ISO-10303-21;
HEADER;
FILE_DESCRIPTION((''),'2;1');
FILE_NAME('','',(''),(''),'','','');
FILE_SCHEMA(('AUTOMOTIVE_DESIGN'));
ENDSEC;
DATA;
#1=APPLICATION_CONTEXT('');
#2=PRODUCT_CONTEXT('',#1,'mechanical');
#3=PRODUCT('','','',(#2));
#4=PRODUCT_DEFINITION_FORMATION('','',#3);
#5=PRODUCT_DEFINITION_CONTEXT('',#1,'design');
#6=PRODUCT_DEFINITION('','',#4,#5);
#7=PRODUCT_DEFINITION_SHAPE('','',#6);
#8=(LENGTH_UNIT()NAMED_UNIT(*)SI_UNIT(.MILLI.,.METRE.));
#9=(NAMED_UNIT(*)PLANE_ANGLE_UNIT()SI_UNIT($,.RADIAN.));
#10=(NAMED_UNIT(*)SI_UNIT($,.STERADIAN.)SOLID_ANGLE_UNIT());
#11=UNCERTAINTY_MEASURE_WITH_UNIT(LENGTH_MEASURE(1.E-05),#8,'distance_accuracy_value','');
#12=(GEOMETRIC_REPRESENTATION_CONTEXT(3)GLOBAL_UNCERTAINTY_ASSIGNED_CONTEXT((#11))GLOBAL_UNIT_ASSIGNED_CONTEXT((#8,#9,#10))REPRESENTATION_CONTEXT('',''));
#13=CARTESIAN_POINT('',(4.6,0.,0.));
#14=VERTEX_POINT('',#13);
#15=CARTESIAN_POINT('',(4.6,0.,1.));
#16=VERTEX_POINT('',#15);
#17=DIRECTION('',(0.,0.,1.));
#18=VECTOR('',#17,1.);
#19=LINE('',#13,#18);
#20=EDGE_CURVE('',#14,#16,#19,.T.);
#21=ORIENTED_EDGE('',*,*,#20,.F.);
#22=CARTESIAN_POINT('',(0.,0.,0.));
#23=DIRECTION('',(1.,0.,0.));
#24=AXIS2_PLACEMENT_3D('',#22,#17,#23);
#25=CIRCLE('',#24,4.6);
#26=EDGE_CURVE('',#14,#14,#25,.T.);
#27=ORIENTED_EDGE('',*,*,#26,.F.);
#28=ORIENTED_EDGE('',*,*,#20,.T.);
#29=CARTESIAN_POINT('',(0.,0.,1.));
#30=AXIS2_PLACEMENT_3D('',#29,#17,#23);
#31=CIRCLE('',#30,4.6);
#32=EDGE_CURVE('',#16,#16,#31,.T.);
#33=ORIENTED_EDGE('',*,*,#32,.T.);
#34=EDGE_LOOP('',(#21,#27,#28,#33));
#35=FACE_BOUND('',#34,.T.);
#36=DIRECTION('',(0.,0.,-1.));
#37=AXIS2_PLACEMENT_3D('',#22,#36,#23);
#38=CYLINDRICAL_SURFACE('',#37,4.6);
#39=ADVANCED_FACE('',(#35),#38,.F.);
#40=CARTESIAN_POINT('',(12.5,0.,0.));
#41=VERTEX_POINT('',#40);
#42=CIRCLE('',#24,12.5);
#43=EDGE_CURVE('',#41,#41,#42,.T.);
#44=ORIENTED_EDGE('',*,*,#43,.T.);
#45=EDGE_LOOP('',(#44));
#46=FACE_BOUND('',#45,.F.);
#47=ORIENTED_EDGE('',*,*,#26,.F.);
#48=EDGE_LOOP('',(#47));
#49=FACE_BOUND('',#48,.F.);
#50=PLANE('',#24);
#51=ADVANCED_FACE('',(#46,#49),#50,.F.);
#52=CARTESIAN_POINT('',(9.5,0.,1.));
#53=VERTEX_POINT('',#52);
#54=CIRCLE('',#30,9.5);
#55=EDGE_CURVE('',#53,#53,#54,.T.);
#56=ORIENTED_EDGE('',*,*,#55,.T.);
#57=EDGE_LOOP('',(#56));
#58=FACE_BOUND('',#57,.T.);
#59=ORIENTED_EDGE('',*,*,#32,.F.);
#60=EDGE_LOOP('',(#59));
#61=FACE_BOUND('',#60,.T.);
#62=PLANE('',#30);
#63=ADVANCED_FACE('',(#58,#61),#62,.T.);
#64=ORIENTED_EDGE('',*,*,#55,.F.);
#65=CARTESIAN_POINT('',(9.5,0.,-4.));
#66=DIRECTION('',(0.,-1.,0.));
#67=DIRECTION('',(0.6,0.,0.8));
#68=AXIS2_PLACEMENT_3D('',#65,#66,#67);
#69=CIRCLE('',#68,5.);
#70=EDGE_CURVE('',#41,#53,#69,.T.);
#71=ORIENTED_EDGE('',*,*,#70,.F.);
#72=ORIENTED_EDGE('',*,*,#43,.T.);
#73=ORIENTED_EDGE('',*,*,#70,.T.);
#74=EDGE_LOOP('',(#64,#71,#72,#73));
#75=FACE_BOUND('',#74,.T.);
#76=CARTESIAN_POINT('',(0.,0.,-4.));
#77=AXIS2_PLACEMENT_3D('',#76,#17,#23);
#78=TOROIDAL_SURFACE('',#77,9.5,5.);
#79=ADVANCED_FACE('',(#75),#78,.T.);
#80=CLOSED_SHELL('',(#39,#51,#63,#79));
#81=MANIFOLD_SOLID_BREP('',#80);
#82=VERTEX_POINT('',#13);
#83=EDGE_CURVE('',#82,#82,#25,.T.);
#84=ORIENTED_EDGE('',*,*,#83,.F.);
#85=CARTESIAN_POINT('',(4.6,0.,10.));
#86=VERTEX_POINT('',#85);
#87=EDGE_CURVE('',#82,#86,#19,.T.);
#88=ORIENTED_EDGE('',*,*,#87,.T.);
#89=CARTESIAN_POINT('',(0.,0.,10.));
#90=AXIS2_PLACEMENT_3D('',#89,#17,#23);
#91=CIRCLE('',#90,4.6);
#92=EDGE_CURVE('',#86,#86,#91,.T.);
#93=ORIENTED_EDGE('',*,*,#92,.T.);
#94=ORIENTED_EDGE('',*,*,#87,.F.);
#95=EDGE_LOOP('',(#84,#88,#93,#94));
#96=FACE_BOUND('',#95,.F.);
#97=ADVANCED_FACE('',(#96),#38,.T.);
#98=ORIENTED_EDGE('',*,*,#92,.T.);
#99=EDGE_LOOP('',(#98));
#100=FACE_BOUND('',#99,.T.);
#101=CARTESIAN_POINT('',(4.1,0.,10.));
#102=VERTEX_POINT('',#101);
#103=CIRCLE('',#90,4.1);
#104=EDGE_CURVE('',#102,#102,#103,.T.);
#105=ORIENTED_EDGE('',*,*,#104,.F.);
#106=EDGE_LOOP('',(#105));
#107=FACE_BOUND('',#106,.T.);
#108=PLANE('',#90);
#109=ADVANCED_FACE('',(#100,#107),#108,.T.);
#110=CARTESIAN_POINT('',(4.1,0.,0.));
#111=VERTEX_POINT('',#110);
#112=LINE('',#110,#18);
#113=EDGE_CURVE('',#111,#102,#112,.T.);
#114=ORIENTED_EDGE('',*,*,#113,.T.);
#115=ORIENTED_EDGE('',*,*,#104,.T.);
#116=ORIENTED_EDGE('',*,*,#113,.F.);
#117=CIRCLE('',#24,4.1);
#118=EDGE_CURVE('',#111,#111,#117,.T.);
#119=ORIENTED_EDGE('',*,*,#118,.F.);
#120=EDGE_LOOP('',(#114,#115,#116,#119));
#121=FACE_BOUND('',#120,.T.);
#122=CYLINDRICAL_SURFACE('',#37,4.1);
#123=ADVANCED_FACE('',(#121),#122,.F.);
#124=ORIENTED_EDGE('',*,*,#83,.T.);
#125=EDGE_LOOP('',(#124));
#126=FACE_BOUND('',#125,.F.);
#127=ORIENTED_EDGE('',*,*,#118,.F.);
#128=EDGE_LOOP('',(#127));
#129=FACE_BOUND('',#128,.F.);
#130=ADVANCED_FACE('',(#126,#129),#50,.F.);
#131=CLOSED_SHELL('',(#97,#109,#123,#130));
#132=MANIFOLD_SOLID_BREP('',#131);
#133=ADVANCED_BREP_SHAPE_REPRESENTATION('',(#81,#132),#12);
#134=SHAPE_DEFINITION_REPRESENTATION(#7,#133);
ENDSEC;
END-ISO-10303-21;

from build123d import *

# Parameters (mm, degrees)
F0_R     = 4.6
F0_R_2   = 4.1
F1_DEPTH = 10
F0_R_3   = 12.5
F2_DEPTH = 1


# Not quite as in the source:
# - a fillet or chamfer that OpenCascade refuses, or shapes differently, is made with other operations: its cross-section is extruded or revolved along the edge and cut away or added


with BuildPart() as f1:
    # F0 (on Top) → F1 (new body)
    with BuildSketch(Plane.XY):
        Circle(F0_R)
        Circle(F0_R_2, mode=Mode.SUBTRACT)
    extrude(amount=F1_DEPTH)


with BuildPart() as f2:
    # F0 (on Top) → F2 (new body)
    with BuildSketch(Plane.XY):
        Circle(F0_R_3)
        Circle(F0_R, mode=Mode.SUBTRACT)
    extrude(amount=F2_DEPTH)

    # F3: fillet of radius 5 on 1 edges, made by hand

    # F3_s1 → F3_t2 (revolve, cut)
    with BuildSketch(Plane.XZ):
        with BuildLine():
            ThreePointArc((12.5, 0), (11.0811388301, 0.7434164903), (9.5, 1))
            Line((9.5, 1), (12.5, 1))
            Line((12.5, 1), (12.5, 0))
        make_face()
    revolve(axis=Axis((0, 0, 1), (0, 0, 1)), mode=Mode.SUBTRACT)


solid = Compound([f1.part, f2.part])
